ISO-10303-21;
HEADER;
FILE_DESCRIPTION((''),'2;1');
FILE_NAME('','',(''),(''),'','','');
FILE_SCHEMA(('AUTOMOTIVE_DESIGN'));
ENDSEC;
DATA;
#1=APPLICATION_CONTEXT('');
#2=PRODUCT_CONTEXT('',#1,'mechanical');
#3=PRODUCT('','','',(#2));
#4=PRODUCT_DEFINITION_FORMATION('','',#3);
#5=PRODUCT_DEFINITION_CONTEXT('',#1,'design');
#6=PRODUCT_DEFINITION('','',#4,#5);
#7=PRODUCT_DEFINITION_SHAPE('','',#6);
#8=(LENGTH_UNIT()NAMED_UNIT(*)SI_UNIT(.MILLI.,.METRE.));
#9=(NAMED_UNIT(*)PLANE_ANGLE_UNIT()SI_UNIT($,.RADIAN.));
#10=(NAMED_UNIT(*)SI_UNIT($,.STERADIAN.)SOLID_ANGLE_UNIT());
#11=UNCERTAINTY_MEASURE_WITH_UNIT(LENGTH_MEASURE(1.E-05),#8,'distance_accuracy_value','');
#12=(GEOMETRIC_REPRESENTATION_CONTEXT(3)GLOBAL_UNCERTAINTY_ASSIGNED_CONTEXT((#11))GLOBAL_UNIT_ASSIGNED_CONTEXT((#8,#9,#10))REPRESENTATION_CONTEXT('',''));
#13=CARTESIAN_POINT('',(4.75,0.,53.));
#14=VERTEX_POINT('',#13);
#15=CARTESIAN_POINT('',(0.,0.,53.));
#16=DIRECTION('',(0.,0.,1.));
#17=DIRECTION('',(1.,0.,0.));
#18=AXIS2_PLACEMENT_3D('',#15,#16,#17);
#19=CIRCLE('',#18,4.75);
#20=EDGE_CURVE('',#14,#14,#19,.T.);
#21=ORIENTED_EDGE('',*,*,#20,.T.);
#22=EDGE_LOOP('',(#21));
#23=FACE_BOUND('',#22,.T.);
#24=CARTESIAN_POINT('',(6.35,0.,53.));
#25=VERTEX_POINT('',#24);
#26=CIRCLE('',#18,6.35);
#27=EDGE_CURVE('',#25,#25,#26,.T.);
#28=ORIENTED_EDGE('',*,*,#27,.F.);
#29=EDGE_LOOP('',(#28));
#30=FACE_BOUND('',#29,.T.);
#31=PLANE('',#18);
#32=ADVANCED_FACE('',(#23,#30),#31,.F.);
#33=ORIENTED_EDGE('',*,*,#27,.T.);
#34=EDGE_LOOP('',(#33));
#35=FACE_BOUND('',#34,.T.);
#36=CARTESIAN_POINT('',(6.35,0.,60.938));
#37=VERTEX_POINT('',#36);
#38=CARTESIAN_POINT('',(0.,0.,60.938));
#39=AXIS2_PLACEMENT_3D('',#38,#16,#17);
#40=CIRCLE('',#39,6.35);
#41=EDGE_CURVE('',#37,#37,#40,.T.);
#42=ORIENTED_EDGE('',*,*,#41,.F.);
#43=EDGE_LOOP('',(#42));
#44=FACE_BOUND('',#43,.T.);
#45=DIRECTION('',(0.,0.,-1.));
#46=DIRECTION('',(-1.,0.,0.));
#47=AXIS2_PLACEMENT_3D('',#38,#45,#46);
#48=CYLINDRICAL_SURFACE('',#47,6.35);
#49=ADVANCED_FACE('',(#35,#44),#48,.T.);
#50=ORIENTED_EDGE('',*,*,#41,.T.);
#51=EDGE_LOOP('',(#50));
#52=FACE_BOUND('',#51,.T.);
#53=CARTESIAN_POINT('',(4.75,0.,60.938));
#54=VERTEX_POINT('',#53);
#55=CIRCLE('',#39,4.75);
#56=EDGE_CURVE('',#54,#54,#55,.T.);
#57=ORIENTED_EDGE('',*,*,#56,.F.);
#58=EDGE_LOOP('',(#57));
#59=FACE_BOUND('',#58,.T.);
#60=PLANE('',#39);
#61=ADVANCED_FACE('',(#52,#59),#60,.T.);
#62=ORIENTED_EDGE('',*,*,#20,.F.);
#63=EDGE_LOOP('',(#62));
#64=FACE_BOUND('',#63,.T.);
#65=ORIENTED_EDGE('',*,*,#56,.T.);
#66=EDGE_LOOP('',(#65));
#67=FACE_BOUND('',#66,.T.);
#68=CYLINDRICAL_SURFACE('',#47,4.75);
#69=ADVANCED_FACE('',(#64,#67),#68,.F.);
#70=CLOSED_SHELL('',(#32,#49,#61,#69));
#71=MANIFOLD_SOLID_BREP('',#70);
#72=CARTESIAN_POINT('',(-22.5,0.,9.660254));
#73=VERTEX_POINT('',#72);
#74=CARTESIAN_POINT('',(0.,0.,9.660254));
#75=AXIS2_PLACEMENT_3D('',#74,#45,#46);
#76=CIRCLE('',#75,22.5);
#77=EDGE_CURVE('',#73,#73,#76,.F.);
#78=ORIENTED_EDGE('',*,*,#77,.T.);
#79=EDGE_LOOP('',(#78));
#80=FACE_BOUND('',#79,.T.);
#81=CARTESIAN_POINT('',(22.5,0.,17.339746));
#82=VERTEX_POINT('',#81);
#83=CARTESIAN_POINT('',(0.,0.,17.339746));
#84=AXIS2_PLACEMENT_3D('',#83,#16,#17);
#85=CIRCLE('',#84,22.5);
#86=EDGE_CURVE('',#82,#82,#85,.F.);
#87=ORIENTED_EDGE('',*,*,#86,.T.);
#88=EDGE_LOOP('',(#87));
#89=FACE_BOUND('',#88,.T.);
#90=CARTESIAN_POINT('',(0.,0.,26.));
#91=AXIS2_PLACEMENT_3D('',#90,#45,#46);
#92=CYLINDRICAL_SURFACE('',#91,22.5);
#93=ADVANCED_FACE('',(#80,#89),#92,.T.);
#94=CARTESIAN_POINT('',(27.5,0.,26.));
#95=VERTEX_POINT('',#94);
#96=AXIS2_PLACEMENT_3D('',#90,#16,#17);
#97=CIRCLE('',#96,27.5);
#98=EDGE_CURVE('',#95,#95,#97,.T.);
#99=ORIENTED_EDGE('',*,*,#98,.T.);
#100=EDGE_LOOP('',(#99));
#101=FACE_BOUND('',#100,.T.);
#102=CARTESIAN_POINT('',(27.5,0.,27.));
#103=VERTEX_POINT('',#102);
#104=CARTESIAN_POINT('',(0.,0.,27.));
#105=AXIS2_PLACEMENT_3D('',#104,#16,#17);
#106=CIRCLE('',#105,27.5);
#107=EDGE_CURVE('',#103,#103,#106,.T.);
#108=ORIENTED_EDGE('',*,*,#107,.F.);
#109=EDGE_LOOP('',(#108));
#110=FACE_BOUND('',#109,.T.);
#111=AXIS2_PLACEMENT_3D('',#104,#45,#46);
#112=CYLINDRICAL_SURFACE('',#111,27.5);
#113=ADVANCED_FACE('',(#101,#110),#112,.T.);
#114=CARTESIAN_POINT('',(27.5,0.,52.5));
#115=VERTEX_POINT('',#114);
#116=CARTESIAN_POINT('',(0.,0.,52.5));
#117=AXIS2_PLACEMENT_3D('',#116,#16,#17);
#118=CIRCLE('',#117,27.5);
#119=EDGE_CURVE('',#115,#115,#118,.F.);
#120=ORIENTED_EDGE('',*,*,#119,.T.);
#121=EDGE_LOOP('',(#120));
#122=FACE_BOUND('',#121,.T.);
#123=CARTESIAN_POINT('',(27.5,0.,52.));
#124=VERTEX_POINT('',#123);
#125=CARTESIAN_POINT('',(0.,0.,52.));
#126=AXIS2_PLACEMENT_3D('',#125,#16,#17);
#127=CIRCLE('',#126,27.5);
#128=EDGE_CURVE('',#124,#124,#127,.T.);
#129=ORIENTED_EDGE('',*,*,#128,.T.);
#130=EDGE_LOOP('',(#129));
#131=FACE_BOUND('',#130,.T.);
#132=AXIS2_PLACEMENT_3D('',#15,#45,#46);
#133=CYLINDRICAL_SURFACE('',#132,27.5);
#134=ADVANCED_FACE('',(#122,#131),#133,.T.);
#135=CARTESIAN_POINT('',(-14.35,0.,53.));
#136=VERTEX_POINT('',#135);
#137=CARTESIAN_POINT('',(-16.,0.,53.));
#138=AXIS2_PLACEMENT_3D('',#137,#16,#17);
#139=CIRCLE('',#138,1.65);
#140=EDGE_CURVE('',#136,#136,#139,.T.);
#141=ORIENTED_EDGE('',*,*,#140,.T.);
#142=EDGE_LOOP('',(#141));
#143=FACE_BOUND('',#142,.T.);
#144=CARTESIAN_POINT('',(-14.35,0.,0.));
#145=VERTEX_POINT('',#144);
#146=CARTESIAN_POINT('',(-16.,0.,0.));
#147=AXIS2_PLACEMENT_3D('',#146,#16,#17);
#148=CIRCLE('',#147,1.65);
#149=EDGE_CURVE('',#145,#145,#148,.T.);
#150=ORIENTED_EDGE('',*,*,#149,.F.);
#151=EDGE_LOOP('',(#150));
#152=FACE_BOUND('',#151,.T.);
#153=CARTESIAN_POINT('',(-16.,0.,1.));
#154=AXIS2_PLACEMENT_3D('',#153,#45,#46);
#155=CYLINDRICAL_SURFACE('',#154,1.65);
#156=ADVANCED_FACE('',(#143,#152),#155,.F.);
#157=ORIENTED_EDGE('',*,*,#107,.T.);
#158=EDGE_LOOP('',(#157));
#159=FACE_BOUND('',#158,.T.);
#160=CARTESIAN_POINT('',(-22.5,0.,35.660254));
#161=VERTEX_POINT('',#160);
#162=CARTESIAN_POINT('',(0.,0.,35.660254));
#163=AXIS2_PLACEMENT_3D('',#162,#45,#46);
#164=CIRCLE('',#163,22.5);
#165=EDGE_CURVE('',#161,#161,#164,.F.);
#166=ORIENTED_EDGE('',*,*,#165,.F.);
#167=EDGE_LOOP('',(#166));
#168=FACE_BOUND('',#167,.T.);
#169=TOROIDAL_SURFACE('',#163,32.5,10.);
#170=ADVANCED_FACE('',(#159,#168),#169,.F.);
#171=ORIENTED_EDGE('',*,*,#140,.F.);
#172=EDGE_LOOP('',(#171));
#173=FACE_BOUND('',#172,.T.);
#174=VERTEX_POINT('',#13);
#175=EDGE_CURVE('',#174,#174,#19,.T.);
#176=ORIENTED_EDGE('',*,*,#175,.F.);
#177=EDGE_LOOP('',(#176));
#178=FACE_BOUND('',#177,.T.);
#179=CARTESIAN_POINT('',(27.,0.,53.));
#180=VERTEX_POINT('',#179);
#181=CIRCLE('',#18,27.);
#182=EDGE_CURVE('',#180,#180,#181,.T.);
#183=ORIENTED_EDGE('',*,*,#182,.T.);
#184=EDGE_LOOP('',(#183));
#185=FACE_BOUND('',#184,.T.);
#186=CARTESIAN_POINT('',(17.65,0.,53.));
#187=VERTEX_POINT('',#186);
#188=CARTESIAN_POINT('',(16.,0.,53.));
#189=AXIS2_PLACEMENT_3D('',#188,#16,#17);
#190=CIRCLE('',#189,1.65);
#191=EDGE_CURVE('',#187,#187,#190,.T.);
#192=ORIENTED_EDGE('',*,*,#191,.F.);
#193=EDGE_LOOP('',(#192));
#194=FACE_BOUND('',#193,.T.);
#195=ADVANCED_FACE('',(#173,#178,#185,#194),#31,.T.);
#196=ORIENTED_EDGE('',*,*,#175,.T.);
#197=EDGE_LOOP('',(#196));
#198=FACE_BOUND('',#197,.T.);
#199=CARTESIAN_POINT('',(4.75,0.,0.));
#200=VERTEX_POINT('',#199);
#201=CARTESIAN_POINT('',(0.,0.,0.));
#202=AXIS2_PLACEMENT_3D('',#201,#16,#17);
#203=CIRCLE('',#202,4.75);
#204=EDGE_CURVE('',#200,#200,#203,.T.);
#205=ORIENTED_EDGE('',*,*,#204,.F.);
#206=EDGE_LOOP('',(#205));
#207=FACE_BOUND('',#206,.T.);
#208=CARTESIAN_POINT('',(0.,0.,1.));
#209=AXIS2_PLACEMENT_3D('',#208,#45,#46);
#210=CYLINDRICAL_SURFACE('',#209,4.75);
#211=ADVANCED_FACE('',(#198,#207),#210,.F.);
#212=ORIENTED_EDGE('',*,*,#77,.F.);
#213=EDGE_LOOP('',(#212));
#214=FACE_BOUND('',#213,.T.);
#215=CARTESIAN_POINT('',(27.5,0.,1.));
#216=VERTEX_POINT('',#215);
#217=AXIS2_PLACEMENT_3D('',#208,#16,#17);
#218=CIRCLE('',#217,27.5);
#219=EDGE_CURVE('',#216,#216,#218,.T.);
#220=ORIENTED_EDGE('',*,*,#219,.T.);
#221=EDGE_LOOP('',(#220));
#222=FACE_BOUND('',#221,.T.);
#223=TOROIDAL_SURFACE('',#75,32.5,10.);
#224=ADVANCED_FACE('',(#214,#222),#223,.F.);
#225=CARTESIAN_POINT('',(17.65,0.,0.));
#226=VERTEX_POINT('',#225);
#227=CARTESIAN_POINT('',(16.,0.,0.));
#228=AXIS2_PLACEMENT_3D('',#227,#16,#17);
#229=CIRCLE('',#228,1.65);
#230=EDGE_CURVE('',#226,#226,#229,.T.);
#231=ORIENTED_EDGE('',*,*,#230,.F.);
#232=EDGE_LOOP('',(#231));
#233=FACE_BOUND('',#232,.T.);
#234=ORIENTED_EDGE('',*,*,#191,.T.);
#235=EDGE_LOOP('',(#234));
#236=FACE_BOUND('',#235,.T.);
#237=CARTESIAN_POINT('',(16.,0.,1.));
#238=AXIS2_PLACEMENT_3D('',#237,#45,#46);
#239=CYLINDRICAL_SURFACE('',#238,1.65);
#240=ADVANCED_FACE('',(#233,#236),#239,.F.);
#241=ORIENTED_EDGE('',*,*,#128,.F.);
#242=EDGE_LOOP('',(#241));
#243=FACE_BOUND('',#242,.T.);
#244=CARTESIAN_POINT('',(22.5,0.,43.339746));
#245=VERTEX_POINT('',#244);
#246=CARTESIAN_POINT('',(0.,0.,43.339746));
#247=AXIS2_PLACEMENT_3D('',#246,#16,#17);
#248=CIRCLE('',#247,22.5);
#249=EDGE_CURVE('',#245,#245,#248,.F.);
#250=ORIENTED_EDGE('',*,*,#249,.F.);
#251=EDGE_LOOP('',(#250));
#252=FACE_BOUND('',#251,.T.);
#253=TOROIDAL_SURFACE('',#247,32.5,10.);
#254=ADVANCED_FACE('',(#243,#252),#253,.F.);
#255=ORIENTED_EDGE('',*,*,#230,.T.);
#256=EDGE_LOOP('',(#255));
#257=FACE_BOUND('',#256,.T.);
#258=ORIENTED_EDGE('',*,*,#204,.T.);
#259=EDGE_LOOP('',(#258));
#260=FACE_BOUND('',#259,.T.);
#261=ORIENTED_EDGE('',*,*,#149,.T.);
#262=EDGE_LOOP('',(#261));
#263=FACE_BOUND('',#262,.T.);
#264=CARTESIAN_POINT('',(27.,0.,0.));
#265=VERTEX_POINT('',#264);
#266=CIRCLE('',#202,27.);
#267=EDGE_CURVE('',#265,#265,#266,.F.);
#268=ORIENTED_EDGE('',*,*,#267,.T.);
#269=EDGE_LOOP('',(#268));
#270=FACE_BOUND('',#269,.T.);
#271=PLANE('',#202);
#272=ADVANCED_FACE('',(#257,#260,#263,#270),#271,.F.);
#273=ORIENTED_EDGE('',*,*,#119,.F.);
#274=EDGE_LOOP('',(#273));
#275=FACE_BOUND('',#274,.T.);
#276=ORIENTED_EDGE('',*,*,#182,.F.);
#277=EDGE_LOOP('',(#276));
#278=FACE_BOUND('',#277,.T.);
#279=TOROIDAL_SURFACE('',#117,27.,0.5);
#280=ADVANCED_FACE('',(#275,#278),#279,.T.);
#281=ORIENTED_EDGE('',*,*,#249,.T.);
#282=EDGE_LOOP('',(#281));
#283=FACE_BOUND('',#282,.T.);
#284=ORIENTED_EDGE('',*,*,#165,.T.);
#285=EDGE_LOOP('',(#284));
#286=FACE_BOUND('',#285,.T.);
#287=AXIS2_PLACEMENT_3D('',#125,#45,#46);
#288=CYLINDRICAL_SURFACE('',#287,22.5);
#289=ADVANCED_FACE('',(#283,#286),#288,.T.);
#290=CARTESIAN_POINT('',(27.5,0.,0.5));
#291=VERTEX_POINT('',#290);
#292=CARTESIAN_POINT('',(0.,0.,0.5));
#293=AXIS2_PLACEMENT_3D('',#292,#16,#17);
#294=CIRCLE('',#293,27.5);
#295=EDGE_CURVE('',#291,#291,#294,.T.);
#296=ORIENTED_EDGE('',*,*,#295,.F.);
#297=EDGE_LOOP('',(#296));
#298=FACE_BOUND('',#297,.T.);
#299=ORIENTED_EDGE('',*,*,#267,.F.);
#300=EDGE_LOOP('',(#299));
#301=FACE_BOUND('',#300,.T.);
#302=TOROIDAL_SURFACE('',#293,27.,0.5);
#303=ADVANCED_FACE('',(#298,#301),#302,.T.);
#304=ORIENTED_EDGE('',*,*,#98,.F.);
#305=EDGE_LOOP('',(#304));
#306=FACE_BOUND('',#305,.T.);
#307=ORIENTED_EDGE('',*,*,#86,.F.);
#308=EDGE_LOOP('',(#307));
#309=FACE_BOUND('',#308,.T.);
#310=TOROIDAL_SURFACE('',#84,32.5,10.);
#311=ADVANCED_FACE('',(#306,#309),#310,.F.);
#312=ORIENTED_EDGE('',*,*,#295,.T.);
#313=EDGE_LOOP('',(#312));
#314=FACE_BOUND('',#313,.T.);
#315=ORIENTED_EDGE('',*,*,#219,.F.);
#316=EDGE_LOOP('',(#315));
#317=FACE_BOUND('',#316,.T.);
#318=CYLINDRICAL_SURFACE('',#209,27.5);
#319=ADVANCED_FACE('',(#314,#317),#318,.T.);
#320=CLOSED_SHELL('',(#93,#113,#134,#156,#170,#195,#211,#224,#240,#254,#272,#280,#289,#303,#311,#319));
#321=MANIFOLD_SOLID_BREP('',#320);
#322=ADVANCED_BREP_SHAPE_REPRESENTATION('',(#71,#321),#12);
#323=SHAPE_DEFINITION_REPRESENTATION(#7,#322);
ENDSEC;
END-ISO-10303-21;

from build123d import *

# Parameters (mm, degrees)
SKETCH1_R           = 27.5
SKETCH1_R_2         = 22.5
SKETCH1_R_3         = 1.65
SKETCH1_R_4         = 4.75
SKETCH1_R_5         = 6.35
BOSS_EXTRUDE1_DEPTH = 1
BOSS_EXTRUDE2_START = 1
SKETCH1_3_R         = 22.5
SKETCH1_3_R_2       = 1.65
SKETCH1_3_R_3       = 4.75
SKETCH1_3_R_4       = 6.35
BOSS_EXTRUDE2_DEPTH = 25
BOSS_EXTRUDE3_START = 26
SKETCH1_4_R         = 27.5
SKETCH1_4_R_2       = 22.5
SKETCH1_4_R_3       = 1.65
SKETCH1_4_R_4       = 4.75
SKETCH1_4_R_5       = 6.35
BOSS_EXTRUDE3_DEPTH = 1
BOSS_EXTRUDE4_START = 27
SKETCH1_5_R         = 22.5
SKETCH1_5_R_2       = 1.65
SKETCH1_5_R_3       = 4.75
SKETCH1_5_R_4       = 6.35
BOSS_EXTRUDE4_DEPTH = 25
BOSS_EXTRUDE5_START = 52
SKETCH1_6_R         = 27.5
SKETCH1_6_R_2       = 22.5
SKETCH1_6_R_3       = 1.65
SKETCH1_6_R_4       = 4.75
SKETCH1_6_R_5       = 6.35
BOSS_EXTRUDE5_DEPTH = 1
FILLET1_R           = 10
FILLET2_R           = 0.5
BOSS_EXTRUDE6_START = 53
SKETCH1_7_R         = 6.35
SKETCH1_7_R_2       = 4.75
BOSS_EXTRUDE6_DEPTH = 7.938


with BuildPart() as part:
    # Sketch1 → Boss-Extrude1 (new body)
    # profile 1 of 3: a face of its own
    with BuildSketch(Plane.XY):
        Circle(SKETCH1_R)
        Circle(SKETCH1_R_2, mode=Mode.SUBTRACT)
    # profile 2 of 3: a face of its own
    with BuildSketch(Plane.XY):
        Circle(SKETCH1_R_2)
        with Locations((16, 0)):
            Circle(SKETCH1_R_3, mode=Mode.SUBTRACT)
        with Locations((-16, 0)):
            Circle(SKETCH1_R_3, mode=Mode.SUBTRACT)
        Circle(SKETCH1_R_4, mode=Mode.SUBTRACT)
    # profile 3 of 3: a face of its own
    with BuildSketch(Plane.XY):
        Circle(SKETCH1_R_5)
        Circle(SKETCH1_R_4, mode=Mode.SUBTRACT)
    extrude(amount=BOSS_EXTRUDE1_DEPTH)

    # Sketch1<3> → Boss-Extrude2 (add)
    # profile 1 of 2: a face of its own
    with BuildSketch(Plane.XY.offset(BOSS_EXTRUDE2_START)):
        Circle(SKETCH1_3_R)
        with Locations((16, 0)):
            Circle(SKETCH1_3_R_2, mode=Mode.SUBTRACT)
        with Locations((-16, 0)):
            Circle(SKETCH1_3_R_2, mode=Mode.SUBTRACT)
        Circle(SKETCH1_3_R_3, mode=Mode.SUBTRACT)
    # profile 2 of 2: a face of its own
    with BuildSketch(Plane.XY.offset(BOSS_EXTRUDE2_START)):
        Circle(SKETCH1_3_R_4)
        Circle(SKETCH1_3_R_3, mode=Mode.SUBTRACT)
    extrude(amount=BOSS_EXTRUDE2_DEPTH)

    # Sketch1<4> → Boss-Extrude3 (add)
    # profile 1 of 3: a face of its own
    with BuildSketch(Plane.XY.offset(BOSS_EXTRUDE3_START)):
        Circle(SKETCH1_4_R)
        Circle(SKETCH1_4_R_2, mode=Mode.SUBTRACT)
    # profile 2 of 3: a face of its own
    with BuildSketch(Plane.XY.offset(BOSS_EXTRUDE3_START)):
        Circle(SKETCH1_4_R_2)
        with Locations((16, 0)):
            Circle(SKETCH1_4_R_3, mode=Mode.SUBTRACT)
        with Locations((-16, 0)):
            Circle(SKETCH1_4_R_3, mode=Mode.SUBTRACT)
        Circle(SKETCH1_4_R_4, mode=Mode.SUBTRACT)
    # profile 3 of 3: a face of its own
    with BuildSketch(Plane.XY.offset(BOSS_EXTRUDE3_START)):
        Circle(SKETCH1_4_R_5)
        Circle(SKETCH1_4_R_4, mode=Mode.SUBTRACT)
    extrude(amount=BOSS_EXTRUDE3_DEPTH)

    # Sketch1<5> → Boss-Extrude4 (add)
    # profile 1 of 2: a face of its own
    with BuildSketch(Plane.XY.offset(BOSS_EXTRUDE4_START)):
        Circle(SKETCH1_5_R)
        with Locations((16, 0)):
            Circle(SKETCH1_5_R_2, mode=Mode.SUBTRACT)
        with Locations((-16, 0)):
            Circle(SKETCH1_5_R_2, mode=Mode.SUBTRACT)
        Circle(SKETCH1_5_R_3, mode=Mode.SUBTRACT)
    # profile 2 of 2: a face of its own
    with BuildSketch(Plane.XY.offset(BOSS_EXTRUDE4_START)):
        Circle(SKETCH1_5_R_4)
        Circle(SKETCH1_5_R_3, mode=Mode.SUBTRACT)
    extrude(amount=BOSS_EXTRUDE4_DEPTH)

    # Sketch1<6> → Boss-Extrude5 (add)
    # profile 1 of 3: a face of its own
    with BuildSketch(Plane.XY.offset(BOSS_EXTRUDE5_START)):
        Circle(SKETCH1_6_R)
        Circle(SKETCH1_6_R_2, mode=Mode.SUBTRACT)
    # profile 2 of 3: a face of its own
    with BuildSketch(Plane.XY.offset(BOSS_EXTRUDE5_START)):
        Circle(SKETCH1_6_R_2)
        with Locations((16, 0)):
            Circle(SKETCH1_6_R_3, mode=Mode.SUBTRACT)
        with Locations((-16, 0)):
            Circle(SKETCH1_6_R_3, mode=Mode.SUBTRACT)
        Circle(SKETCH1_6_R_4, mode=Mode.SUBTRACT)
    # profile 3 of 3: a face of its own
    with BuildSketch(Plane.XY.offset(BOSS_EXTRUDE5_START)):
        Circle(SKETCH1_6_R_5)
        Circle(SKETCH1_6_R_4, mode=Mode.SUBTRACT)
    extrude(amount=BOSS_EXTRUDE5_DEPTH)

    # Fillet1
    # the kernel refuses this fillet: 10 mm, written as the material it adds along each edge
    with BuildSketch(Plane(origin=(0, 0, 1), x_dir=(1, 0, 0), z_dir=(0, -1, 0))) as fillet1_piece_1:
        with BuildLine():
            CenterArc((32.5, 8.660254038), FILLET1_R, 180, 60)
            Line((22.5, 8.660254038), (22.3, 8.660254038))
            Line((22.3, 8.660254038), (22.3, 0))
            Line((22.3, 0), (22.5, -0.2))
            ThreePointArc((22.5, -0.2), (25, -0.2), (27.4, -0.173205081))
            Line((27.4, -0.173205081), (27.5, 0))
        make_face()
    revolve(axis=Axis((0, 0, 1), (0, 0, 1)))
    with BuildSketch(Plane(origin=(0, 0, 26), x_dir=(1, 0, 0), z_dir=(0, -1, 0))) as fillet1_piece_2:
        with BuildLine():
            CenterArc((32.5, -8.660254038), FILLET1_R, 120, 60)
            Line((27.5, 0), (27.4, 0.173205081))
            ThreePointArc((27.4, 0.173205081), (25, 0.2), (22.5, 0.2))
            Line((22.5, 0.2), (22.3, 0))
            Line((22.3, 0), (22.3, -8.660254038))
            Line((22.3, -8.660254038), (22.5, -8.660254038))
        make_face()
    revolve(axis=Axis((0, 0, 26), (0, 0, 1)))
    with BuildSketch(Plane(origin=(0, 0, 52), x_dir=(1, 0, 0), z_dir=(0, -1, 0))) as fillet1_piece_3:
        with BuildLine():
            CenterArc((32.5, -8.660254038), FILLET1_R, 120, 60)
            Line((27.5, 0), (27.4, 0.173205081))
            ThreePointArc((27.4, 0.173205081), (25, 0.2), (22.5, 0.2))
            Line((22.5, 0.2), (22.3, 0))
            Line((22.3, 0), (22.3, -8.660254038))
            Line((22.3, -8.660254038), (22.5, -8.660254038))
        make_face()
    revolve(axis=Axis((0, 0, 52), (0, 0, 1)))
    with BuildSketch(Plane(origin=(0, 0, 27), x_dir=(1, 0, 0), z_dir=(0, -1, 0))) as fillet1_piece_4:
        with BuildLine():
            CenterArc((32.5, 8.660254038), FILLET1_R, 180, 60)
            Line((22.5, 8.660254038), (22.3, 8.660254038))
            Line((22.3, 8.660254038), (22.3, 0))
            Line((22.3, 0), (22.5, -0.2))
            ThreePointArc((22.5, -0.2), (25, -0.2), (27.4, -0.173205081))
            Line((27.4, -0.173205081), (27.5, 0))
        make_face()
    revolve(axis=Axis((0, 0, 27), (0, 0, 1)))

    # Fillet2
    fillet2_edges = [part.edges().sort_by_distance(p)[0] for p in [
        (-27.5, 0, 53),
        (-27.5, 0, 0),
    ]]
    fillet(fillet2_edges, radius=FILLET2_R)


with BuildPart() as body_2:
    # Sketch1<7> → Boss-Extrude6 (new body)
    with BuildSketch(Plane.XY.offset(BOSS_EXTRUDE6_START)):
        Circle(SKETCH1_7_R)
        Circle(SKETCH1_7_R_2, mode=Mode.SUBTRACT)
    extrude(amount=BOSS_EXTRUDE6_DEPTH)


solid = Compound([part.part, body_2.part])
